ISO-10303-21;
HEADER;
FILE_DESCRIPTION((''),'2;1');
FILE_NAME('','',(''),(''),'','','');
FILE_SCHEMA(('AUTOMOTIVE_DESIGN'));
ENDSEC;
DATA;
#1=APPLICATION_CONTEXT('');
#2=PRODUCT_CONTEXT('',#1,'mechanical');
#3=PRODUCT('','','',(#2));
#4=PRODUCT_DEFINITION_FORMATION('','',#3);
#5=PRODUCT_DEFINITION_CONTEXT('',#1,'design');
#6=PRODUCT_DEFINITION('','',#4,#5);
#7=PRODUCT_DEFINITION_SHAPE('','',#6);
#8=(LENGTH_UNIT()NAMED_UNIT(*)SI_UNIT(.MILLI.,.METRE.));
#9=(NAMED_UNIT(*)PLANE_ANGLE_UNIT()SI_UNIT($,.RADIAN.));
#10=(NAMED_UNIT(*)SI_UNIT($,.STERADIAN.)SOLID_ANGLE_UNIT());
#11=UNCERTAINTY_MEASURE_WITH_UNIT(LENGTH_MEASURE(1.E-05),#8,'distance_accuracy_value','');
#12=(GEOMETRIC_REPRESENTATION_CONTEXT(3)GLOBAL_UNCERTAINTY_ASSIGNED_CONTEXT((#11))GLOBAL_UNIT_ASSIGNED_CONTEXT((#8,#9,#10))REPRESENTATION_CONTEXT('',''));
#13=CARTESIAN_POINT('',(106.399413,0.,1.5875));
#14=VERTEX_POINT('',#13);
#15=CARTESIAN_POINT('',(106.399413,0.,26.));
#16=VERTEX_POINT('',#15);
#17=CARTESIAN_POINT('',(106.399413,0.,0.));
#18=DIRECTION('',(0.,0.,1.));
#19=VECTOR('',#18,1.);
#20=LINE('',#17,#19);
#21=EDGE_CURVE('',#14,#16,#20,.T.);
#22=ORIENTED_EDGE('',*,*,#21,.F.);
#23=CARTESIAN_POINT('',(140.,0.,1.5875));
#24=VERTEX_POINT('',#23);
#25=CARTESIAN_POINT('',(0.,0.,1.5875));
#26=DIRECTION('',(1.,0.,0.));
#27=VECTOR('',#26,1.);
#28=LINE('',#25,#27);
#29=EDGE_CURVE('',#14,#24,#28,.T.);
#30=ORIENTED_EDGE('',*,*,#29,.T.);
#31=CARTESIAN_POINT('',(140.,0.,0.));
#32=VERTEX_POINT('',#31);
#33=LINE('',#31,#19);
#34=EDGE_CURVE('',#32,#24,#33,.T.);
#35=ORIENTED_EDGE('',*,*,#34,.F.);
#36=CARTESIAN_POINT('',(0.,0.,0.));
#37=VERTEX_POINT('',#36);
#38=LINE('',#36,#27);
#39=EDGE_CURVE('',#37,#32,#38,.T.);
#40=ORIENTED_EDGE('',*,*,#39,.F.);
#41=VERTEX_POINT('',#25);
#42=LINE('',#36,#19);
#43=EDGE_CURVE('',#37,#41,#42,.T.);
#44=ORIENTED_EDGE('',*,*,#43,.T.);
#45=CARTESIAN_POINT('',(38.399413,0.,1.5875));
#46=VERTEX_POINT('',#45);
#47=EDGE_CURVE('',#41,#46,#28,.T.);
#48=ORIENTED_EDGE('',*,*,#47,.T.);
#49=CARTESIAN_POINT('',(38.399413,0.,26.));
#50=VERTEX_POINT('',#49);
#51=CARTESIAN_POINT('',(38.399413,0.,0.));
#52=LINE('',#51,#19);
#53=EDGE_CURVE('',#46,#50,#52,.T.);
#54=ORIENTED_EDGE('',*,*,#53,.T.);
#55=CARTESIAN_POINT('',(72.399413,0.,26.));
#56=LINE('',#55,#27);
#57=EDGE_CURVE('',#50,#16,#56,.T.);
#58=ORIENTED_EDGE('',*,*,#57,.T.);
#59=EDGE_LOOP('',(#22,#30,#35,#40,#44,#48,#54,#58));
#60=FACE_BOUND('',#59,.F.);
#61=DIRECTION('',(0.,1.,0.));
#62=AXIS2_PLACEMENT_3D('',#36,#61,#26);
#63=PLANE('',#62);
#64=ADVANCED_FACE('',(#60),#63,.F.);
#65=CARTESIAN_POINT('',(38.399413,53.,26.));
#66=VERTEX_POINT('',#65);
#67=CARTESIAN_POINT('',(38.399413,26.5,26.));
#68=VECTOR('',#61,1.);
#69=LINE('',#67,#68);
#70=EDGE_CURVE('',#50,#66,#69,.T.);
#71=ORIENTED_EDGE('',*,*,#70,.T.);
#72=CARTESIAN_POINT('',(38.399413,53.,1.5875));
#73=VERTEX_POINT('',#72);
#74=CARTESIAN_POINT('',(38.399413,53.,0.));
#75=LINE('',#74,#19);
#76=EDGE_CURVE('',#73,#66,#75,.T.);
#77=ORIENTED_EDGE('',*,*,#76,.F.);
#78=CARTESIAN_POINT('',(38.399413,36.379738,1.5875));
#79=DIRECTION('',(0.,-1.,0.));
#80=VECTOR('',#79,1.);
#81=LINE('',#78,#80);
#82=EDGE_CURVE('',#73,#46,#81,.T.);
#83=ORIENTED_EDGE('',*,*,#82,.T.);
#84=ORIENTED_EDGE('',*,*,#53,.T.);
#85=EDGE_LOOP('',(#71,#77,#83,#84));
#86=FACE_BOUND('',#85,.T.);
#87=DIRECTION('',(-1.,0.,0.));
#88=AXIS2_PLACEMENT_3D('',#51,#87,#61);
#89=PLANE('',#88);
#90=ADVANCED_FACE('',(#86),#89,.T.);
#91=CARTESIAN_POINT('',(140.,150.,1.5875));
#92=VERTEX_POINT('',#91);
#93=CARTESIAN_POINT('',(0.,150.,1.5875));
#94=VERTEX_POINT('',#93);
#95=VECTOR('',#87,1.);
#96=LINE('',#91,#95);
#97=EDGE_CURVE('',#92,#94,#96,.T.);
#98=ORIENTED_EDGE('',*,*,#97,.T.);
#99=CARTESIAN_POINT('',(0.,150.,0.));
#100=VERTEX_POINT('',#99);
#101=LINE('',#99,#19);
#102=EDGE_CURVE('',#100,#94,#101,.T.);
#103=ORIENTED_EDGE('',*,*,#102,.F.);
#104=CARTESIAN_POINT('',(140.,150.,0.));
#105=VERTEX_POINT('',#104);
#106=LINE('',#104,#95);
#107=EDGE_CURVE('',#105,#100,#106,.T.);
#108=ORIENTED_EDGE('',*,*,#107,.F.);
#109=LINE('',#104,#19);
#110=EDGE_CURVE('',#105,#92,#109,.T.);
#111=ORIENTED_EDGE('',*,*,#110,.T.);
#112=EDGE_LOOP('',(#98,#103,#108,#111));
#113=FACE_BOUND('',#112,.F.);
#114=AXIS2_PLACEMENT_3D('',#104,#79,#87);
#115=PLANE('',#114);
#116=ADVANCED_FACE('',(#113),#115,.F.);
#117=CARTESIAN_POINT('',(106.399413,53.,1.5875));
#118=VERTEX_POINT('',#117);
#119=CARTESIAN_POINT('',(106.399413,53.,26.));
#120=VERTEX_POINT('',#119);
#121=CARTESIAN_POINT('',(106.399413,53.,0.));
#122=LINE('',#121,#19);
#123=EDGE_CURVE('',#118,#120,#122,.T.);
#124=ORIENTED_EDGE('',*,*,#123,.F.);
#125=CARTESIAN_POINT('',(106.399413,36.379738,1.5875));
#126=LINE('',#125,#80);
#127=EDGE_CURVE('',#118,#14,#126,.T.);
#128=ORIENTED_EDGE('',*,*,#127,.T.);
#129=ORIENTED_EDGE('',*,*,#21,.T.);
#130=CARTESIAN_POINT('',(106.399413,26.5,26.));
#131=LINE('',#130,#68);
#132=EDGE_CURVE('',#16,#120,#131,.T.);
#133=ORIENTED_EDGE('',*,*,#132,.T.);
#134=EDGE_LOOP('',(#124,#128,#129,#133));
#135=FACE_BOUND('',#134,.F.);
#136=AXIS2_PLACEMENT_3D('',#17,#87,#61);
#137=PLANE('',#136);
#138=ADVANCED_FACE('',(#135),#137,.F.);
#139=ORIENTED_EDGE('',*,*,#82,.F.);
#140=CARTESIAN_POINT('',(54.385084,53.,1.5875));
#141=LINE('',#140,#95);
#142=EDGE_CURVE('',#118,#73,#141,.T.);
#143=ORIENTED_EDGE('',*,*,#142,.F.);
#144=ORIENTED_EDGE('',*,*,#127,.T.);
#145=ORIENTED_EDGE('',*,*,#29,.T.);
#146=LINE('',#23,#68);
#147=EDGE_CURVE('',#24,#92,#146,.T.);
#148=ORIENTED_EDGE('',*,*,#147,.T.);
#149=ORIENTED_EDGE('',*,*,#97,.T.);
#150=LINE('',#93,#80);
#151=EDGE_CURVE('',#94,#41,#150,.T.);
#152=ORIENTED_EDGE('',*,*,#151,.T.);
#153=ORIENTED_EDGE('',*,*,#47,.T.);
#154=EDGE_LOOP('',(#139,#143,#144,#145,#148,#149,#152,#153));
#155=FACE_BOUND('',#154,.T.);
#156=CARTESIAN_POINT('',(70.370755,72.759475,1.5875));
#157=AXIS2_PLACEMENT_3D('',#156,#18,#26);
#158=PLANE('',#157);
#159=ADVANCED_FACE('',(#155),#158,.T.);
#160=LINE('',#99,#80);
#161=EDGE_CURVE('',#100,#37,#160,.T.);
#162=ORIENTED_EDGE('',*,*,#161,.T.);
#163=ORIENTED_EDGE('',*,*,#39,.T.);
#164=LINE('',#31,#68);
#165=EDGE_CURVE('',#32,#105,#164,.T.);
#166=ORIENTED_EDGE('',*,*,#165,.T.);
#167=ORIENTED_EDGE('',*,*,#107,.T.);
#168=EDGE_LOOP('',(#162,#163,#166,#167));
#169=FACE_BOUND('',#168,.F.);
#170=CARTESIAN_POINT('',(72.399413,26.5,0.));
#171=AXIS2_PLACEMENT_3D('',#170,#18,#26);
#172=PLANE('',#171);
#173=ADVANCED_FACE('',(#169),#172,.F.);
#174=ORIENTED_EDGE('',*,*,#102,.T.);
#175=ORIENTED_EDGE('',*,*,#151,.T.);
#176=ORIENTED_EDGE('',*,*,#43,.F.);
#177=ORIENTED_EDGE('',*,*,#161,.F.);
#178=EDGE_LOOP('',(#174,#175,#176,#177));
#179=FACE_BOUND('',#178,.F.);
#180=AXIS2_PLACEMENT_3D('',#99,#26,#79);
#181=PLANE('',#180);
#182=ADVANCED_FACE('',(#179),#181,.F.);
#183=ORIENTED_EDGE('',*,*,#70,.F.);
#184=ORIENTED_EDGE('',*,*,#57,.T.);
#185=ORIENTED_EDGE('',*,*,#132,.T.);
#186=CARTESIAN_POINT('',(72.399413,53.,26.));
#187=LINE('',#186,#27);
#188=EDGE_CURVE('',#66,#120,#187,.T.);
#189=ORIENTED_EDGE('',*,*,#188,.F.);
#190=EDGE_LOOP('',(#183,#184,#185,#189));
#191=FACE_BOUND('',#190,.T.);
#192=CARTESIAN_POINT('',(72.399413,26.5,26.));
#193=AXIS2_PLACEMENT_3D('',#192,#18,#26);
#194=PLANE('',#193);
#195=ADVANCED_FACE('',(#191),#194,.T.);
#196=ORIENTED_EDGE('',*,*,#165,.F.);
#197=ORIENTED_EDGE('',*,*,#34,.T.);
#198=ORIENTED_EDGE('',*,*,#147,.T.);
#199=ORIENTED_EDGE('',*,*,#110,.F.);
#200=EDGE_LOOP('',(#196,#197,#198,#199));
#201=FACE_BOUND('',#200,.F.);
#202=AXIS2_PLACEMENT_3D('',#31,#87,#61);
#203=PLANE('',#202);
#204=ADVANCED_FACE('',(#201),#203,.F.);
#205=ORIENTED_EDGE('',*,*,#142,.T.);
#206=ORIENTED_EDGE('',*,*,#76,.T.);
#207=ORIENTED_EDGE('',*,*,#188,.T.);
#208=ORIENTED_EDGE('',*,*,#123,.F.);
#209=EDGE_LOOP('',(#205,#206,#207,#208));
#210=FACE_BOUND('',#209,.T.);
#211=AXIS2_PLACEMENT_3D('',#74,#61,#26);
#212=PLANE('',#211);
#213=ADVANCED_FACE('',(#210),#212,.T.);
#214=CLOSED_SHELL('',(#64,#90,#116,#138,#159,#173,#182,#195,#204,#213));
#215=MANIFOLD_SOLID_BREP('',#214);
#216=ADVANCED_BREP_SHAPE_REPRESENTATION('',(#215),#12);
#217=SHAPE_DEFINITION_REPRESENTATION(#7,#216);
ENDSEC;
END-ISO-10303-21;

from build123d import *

# Parameters (mm, degrees)
F0_W     = 68
F0_H     = 53
F1_DEPTH = 1.5875
F2_DEPTH = 26


# Not quite as in the source:
# - a length typed as a fraction of an inch, garbled in the dataset ("3 / 203.2 mm" for 3/8 in), is restored


with BuildPart() as f1:
    # F0 (on Top) → F1 (new body)
    with BuildSketch(Plane.XY):
        Polygon((0, 150), (0, 0), (38.399413228, 0), (38.399413228, 53), (106.399413228, 53), (106.399413228, 0), (140, 0), (140, 150), align=None)
        with Locations((72.399413228, 26.5)):
            Rectangle(F0_W, F0_H)
    extrude(amount=F1_DEPTH)

    # F0 (on Top) → F2 (join)
    with BuildSketch(Plane.XY):
        with Locations((72.399413228, 26.5)):
            Rectangle(F0_W, F0_H)
    extrude(amount=F2_DEPTH)


solid = f1.part
